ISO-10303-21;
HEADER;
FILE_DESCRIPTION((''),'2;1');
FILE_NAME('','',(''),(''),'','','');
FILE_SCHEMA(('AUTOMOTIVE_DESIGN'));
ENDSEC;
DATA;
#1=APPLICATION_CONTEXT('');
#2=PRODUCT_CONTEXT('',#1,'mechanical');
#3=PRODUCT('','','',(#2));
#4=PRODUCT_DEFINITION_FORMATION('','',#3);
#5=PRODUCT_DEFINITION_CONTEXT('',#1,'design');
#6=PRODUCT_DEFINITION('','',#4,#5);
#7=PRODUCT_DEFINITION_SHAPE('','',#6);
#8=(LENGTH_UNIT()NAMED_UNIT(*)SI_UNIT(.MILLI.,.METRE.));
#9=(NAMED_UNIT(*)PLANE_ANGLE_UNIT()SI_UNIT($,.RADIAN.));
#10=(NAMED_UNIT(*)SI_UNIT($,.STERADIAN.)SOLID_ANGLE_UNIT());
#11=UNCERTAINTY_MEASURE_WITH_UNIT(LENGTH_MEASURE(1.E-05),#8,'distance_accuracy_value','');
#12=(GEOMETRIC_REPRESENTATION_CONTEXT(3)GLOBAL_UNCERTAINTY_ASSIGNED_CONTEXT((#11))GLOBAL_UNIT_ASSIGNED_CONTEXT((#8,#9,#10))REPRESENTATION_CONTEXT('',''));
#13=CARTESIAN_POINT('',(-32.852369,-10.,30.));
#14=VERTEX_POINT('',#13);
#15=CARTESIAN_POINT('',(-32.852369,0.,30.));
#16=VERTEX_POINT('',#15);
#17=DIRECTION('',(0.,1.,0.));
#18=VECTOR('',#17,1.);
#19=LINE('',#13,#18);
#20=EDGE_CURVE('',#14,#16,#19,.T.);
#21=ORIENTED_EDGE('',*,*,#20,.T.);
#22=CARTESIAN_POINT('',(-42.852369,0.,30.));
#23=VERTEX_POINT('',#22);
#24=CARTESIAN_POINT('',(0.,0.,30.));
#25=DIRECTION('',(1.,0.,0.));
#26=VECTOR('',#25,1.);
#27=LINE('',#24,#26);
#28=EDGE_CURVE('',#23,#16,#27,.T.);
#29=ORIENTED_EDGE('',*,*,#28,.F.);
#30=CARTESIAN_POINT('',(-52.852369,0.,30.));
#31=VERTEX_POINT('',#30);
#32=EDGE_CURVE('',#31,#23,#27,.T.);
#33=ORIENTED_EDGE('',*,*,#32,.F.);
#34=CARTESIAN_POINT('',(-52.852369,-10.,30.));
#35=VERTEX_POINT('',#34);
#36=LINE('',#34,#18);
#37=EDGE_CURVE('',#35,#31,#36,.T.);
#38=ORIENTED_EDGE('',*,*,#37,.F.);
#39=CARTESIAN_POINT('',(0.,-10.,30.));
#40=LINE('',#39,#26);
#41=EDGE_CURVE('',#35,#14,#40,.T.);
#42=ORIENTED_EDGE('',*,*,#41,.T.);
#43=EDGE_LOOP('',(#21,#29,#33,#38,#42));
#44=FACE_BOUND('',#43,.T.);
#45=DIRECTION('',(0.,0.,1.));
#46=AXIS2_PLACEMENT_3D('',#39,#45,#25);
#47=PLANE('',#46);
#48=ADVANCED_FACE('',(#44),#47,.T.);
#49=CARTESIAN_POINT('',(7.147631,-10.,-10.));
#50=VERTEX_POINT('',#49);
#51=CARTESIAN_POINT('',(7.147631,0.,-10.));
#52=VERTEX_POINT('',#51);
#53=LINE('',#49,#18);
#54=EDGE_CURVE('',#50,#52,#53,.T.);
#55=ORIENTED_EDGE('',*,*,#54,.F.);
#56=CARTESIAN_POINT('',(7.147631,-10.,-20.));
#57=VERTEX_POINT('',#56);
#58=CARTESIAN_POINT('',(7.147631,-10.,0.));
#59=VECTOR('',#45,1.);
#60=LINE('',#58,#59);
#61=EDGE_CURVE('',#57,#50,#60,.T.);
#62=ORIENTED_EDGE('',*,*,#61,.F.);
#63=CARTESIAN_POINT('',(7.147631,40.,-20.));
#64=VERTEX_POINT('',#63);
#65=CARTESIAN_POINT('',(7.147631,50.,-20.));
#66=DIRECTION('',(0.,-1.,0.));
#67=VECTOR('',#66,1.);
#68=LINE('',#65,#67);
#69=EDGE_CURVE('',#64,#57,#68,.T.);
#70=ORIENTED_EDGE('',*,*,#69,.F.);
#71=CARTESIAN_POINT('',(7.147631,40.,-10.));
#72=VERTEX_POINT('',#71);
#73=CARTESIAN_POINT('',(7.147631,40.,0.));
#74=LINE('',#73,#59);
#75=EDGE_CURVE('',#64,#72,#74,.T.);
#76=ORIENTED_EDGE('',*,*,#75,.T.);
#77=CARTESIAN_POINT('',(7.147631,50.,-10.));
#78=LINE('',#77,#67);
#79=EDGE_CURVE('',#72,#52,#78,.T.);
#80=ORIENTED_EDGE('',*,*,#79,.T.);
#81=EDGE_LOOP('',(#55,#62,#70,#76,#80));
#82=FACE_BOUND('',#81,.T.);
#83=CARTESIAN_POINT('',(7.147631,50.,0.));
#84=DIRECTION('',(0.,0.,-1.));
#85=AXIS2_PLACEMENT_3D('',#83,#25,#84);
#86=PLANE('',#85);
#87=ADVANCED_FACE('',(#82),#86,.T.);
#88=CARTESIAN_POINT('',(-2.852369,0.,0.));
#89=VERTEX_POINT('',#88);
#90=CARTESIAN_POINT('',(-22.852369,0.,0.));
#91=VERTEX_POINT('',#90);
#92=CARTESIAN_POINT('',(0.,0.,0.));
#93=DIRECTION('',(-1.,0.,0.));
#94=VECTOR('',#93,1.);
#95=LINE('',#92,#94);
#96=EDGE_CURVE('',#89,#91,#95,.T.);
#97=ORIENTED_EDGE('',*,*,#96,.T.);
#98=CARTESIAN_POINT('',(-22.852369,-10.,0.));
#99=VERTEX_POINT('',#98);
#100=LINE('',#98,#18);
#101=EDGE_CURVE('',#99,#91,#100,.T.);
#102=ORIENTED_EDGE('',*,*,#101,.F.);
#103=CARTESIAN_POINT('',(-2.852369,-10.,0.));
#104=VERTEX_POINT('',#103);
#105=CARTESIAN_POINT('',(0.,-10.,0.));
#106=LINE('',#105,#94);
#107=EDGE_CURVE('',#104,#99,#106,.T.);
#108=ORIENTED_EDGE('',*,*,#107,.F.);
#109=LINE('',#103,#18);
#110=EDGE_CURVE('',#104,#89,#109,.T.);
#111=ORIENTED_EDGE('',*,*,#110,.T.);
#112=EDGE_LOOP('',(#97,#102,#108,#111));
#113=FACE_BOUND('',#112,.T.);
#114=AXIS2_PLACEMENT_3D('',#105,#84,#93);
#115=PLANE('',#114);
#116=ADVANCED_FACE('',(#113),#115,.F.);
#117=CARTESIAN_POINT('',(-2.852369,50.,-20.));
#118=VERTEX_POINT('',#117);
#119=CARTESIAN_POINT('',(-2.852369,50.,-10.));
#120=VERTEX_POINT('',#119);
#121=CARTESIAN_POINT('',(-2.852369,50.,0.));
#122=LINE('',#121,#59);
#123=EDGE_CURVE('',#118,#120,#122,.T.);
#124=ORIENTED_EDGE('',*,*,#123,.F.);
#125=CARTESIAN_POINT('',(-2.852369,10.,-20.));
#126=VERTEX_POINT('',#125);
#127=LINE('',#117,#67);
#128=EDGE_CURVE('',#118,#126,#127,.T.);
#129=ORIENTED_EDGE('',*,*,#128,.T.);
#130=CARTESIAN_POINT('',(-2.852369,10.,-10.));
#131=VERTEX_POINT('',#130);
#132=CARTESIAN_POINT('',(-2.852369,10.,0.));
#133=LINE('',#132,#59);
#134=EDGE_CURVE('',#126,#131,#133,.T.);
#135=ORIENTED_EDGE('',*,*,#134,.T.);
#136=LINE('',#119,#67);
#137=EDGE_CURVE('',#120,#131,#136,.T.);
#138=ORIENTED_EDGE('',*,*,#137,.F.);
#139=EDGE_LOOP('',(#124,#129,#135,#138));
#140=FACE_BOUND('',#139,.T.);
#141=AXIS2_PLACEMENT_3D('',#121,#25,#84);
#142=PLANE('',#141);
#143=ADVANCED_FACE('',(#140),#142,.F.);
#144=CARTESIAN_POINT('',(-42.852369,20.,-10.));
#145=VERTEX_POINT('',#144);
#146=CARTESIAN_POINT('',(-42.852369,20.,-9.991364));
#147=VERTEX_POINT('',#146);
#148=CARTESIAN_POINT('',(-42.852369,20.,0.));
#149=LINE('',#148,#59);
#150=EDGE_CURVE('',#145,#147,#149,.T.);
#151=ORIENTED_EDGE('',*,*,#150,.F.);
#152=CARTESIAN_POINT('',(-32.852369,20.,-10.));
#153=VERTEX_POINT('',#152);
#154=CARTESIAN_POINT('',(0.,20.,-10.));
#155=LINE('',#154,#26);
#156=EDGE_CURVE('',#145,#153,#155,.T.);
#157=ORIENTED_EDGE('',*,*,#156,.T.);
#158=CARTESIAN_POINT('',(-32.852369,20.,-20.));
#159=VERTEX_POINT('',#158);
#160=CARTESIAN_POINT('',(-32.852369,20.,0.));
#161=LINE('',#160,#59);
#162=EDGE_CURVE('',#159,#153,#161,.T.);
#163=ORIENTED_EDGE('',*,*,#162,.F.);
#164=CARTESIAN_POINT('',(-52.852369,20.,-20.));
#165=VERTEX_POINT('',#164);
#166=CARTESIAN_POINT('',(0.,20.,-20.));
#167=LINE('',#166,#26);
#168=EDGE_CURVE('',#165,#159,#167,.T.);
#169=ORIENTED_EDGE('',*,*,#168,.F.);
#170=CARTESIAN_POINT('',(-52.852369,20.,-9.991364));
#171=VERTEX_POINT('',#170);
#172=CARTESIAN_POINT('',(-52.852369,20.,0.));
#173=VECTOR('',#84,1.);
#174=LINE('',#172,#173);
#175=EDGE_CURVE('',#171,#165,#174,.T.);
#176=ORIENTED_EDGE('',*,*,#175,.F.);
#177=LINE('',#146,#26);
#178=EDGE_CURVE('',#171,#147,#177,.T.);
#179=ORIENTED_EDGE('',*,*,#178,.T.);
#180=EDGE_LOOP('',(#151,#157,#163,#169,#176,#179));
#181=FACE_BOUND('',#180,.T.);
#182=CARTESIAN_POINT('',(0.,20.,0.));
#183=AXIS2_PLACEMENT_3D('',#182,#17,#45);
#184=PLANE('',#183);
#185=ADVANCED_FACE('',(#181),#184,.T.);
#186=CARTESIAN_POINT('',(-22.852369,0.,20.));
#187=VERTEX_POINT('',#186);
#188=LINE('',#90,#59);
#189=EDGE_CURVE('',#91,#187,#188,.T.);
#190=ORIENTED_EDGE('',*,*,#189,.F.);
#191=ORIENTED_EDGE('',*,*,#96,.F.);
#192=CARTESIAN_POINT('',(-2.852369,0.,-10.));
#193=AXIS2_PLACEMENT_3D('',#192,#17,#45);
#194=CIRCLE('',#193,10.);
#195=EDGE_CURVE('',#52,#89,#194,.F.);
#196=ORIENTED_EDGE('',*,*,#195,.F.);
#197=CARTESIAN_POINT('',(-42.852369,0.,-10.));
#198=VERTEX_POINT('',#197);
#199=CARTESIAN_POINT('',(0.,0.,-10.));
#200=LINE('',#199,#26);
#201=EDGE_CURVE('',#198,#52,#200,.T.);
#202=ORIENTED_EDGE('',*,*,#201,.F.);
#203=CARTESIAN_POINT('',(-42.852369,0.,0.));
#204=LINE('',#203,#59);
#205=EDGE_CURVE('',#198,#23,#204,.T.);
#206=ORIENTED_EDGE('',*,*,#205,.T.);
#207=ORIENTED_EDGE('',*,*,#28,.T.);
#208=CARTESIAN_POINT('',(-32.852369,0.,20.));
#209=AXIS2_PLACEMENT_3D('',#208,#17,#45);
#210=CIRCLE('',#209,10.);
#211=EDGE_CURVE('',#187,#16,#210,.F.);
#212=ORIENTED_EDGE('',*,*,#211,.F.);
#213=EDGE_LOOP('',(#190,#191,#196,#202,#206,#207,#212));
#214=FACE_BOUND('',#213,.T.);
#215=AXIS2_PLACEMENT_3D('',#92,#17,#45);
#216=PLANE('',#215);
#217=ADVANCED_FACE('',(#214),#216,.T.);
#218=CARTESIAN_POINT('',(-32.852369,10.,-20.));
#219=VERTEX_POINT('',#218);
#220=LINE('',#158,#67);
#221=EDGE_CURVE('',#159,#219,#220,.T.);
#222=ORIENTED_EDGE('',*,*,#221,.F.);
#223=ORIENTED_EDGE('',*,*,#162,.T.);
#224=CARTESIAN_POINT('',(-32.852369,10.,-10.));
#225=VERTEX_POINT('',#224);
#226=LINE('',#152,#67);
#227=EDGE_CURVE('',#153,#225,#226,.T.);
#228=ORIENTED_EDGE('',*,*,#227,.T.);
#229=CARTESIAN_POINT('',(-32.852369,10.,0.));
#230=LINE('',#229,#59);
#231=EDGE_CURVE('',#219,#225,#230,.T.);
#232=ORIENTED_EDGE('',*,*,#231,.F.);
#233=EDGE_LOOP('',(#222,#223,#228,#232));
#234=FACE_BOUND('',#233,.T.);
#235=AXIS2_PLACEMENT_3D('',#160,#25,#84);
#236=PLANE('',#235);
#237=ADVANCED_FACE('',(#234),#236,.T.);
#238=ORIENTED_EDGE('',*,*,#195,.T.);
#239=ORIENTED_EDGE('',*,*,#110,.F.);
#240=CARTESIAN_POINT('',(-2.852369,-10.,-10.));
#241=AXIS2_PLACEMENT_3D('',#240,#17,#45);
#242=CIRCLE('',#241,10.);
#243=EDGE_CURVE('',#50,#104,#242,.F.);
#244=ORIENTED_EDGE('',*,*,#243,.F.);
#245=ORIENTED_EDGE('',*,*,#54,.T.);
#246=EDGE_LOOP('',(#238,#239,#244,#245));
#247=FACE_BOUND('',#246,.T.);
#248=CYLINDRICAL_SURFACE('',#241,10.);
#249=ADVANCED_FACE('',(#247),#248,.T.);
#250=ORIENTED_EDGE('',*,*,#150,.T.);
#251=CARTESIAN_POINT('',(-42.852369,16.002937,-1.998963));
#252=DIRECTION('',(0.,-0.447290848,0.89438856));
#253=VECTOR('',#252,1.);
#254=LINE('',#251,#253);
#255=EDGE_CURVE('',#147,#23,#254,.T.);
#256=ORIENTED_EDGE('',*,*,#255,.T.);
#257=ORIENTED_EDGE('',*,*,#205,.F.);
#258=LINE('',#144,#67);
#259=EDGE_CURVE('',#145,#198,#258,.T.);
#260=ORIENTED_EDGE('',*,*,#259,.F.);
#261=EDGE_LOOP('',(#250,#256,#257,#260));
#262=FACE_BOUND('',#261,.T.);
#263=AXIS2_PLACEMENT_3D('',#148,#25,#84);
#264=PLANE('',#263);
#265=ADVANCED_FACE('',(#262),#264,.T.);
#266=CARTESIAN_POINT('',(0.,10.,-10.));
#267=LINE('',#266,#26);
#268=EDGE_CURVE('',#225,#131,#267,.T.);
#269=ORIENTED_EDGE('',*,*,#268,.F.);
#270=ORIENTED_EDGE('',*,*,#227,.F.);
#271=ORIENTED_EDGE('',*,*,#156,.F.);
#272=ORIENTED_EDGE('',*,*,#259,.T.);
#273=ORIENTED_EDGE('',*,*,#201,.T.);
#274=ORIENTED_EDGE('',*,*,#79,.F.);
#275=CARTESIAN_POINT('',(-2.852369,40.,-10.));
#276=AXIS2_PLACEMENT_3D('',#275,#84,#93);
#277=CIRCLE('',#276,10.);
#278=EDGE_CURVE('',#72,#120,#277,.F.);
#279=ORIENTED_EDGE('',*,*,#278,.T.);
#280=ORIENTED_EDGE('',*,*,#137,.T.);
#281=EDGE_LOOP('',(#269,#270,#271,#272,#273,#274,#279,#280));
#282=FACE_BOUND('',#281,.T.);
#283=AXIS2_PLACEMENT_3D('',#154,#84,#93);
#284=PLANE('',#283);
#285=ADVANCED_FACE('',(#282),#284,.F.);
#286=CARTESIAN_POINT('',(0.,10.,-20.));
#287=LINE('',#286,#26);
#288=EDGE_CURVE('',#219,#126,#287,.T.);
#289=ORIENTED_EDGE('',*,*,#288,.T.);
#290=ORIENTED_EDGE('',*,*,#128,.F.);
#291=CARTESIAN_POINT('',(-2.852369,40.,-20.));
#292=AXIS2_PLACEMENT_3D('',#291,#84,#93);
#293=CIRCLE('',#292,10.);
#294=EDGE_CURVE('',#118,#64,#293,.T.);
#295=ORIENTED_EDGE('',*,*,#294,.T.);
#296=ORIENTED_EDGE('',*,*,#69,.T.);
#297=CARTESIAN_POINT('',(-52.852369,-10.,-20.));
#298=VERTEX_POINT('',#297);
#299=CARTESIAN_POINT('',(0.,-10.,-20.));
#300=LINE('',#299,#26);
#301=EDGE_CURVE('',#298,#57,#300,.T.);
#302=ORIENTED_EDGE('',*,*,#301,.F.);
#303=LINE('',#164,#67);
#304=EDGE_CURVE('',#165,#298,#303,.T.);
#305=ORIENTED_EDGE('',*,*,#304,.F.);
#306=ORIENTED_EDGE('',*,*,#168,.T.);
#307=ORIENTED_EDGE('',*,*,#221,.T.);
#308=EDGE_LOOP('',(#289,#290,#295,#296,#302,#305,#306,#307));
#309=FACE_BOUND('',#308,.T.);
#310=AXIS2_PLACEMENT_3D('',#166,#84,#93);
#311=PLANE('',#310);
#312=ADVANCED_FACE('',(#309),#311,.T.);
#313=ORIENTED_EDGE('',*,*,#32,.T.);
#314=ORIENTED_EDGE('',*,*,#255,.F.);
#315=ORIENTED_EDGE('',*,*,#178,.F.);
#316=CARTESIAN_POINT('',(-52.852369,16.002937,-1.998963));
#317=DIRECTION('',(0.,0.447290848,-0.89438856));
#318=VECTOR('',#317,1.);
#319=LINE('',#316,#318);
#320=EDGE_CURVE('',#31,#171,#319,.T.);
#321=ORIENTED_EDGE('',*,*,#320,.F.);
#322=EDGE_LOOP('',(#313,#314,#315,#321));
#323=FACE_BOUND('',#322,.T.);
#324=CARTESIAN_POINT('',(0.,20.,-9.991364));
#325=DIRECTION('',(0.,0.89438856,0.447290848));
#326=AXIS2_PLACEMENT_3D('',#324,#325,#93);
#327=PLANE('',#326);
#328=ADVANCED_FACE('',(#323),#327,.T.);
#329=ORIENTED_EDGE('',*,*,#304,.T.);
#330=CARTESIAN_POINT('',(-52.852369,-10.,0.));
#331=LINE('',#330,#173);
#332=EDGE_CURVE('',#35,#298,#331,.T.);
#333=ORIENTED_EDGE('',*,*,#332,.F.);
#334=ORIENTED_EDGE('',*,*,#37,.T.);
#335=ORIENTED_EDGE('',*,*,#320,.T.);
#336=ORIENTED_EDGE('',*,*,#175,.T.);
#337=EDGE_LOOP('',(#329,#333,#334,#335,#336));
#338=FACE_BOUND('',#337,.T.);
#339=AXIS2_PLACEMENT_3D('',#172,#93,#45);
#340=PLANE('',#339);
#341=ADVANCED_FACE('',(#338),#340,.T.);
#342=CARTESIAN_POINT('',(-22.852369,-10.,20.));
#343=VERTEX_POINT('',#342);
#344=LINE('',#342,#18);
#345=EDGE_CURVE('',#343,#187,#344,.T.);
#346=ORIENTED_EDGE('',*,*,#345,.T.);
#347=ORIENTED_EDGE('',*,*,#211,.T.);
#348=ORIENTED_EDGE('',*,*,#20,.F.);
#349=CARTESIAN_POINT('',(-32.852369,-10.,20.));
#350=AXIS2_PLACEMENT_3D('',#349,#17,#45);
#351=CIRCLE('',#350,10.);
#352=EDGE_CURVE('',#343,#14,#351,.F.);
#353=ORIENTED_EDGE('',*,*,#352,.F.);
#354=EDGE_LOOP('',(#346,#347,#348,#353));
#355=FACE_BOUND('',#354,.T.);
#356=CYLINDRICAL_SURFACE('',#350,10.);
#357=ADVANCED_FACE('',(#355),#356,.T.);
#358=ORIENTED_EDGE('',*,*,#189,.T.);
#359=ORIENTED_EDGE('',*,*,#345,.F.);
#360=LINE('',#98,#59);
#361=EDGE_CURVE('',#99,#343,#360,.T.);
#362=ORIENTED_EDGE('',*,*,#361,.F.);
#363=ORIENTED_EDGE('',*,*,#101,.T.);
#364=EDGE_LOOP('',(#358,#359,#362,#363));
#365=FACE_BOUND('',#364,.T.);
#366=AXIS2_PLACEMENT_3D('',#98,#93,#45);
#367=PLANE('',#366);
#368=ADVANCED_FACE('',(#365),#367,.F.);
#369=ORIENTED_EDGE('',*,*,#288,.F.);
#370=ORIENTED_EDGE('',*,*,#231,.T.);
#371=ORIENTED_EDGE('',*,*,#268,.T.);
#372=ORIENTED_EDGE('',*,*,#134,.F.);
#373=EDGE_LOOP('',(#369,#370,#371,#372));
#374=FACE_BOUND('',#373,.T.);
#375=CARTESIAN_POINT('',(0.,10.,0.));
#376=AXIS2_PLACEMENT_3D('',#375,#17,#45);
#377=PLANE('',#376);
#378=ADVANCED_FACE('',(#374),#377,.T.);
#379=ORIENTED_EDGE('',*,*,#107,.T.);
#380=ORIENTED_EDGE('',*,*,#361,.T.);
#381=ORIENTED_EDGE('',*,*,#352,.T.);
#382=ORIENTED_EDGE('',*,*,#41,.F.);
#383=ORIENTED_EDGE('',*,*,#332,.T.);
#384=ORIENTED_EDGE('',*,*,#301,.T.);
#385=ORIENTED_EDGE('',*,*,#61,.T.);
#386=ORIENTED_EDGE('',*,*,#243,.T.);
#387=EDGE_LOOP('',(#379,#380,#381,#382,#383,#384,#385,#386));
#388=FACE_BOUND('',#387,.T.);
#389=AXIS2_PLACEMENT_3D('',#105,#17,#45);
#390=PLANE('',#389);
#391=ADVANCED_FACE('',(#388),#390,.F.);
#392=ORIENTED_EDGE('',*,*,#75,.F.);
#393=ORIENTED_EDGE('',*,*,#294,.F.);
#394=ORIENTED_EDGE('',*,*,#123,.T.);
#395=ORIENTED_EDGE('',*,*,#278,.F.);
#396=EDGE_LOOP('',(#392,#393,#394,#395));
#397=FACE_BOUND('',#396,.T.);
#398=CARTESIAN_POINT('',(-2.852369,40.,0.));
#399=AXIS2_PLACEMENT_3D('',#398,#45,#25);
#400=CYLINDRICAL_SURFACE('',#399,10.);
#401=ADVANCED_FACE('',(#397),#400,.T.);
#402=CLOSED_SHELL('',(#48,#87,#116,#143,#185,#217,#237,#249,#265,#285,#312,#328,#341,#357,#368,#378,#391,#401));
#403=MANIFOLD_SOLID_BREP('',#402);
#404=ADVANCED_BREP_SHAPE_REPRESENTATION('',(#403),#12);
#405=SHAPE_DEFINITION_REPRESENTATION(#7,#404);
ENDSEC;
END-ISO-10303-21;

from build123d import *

# Parameters (mm, degrees)
SKETCH1_W           = 10
SKETCH1_H           = 10
BOSS_EXTRUDE1_DEPTH = 20
SKETCH1_3_W         = 10
SKETCH1_3_H         = 10
BOSS_EXTRUDE2_DEPTH = 20
SKETCH1_4_W         = 10
SKETCH1_4_H         = 40
BOSS_EXTRUDE3_DEPTH = 20
SKETCH1_5_W         = 10
SKETCH1_5_H         = 10
BOSS_EXTRUDE4_DEPTH = 50
SKETCH1_6_W         = 30
SKETCH1_6_H         = 10
BOSS_EXTRUDE5_DEPTH = 10
CHAMFER1_SIZE2      = 39.991364166
CHAMFER1_SIZE       = 20
FILLET1_R           = 10
SKETCH1_7_W         = 10
SKETCH1_7_H         = 40
SKETCH1_7_H_2       = 10
SKETCH1_7_W_2       = 30
BOSS_EXTRUDE6_DEPTH = 10


with BuildPart() as part:
    # Sketch1 → Boss-Extrude1 (new body)
    with BuildSketch(Plane(origin=(0, 0, 0), x_dir=(1, 0, 0), z_dir=(0, 1, 0))):
        with Locations((-47.852369013, 15)):
            Rectangle(SKETCH1_W, SKETCH1_H)
    extrude(amount=BOSS_EXTRUDE1_DEPTH)

    # Sketch1<3> → Boss-Extrude2 (add)
    with BuildSketch(Plane(origin=(0, 0, 0), x_dir=(1, 0, 0), z_dir=(0, 1, 0))):
        with Locations((-37.852369013, 15)):
            Rectangle(SKETCH1_3_W, SKETCH1_3_H)
    extrude(amount=BOSS_EXTRUDE2_DEPTH)

    # Sketch1<4> → Boss-Extrude3 (add)
    with BuildSketch(Plane(origin=(0, 0, 0), x_dir=(1, 0, 0), z_dir=(0, 1, 0))):
        with Locations((-47.852369013, -10)):
            Rectangle(SKETCH1_4_W, SKETCH1_4_H)
    extrude(amount=BOSS_EXTRUDE3_DEPTH)



with BuildPart() as body_2:
    # Sketch1<5> → Boss-Extrude4 (new body)
    with BuildSketch(Plane(origin=(0, 0, 0), x_dir=(1, 0, 0), z_dir=(0, 1, 0))):
        with Locations((2.147630987, 15)):
            Rectangle(SKETCH1_5_W, SKETCH1_5_H)
    extrude(amount=BOSS_EXTRUDE4_DEPTH)


with BuildPart() as part_1:
    add(part.part)

    add(body_2.part)  # Boss-Extrude5 merges body 2
    # Sketch1<6> → Boss-Extrude5 (add)
    with BuildSketch(Plane(origin=(0, 0, 0), x_dir=(1, 0, 0), z_dir=(0, 1, 0))):
        with Locations((-17.852369013, 15)):
            Rectangle(SKETCH1_6_W, SKETCH1_6_H)
    extrude(amount=BOSS_EXTRUDE5_DEPTH)

    # Chamfer1
    chamfer1_edges = [part_1.edges().sort_by_distance(p)[0] for p in [
        (-47.852369013, 20, 30),
    ]]
    chamfer1_side = [part_1.faces().sort_by_distance(p)[0] for p in [
        (-47.852369013, 19.6, 30),
    ]]
    chamfer(chamfer1_edges, length=CHAMFER1_SIZE - 0.0001, length2=CHAMFER1_SIZE2 - 0.0001, reference=chamfer1_side[0])  # a hair under: the kernel refuses the full size

    # Fillet1
    fillet1_edges = [part_1.edges().sort_by_distance(p)[0] for p in [
        (7.147630987, 50, -15),
    ]]
    fillet(fillet1_edges, radius=FILLET1_R - 0.0001)  # a hair under: the kernel refuses the full size

    # Sketch1<7> → Boss-Extrude6 (add)
    with BuildSketch(Plane(origin=(0, 0, 0), x_dir=(1, 0, 0), z_dir=(0, 1, 0))):
        with Locations((-47.852369013, -10)):
            Rectangle(SKETCH1_7_W, SKETCH1_7_H)
        with BuildLine():
            Line((-42.852369013, 10), (-42.852369013, -30))
            Line((-42.852369013, -30), (-32.852369013, -30))
            ThreePointArc((-32.852369013, -30), (-25.781301201, -27.071067812), (-22.852369013, -20))
            Line((-22.852369013, -20), (-22.852369013, 0))
            Line((-22.852369013, 0), (-2.852369013, 0))
            ThreePointArc((-2.852369013, 0), (4.218698799, 2.928932188), (7.147630987, 10))
            Line((7.147630987, 10), (-2.852369013, 10))
            Line((-2.852369013, 10), (-32.852369013, 10))
            Line((-32.852369013, 10), (-42.852369013, 10))
        make_face()
        with Locations((-47.852369013, 15)):
            Rectangle(SKETCH1_7_W, SKETCH1_7_H_2)
        with Locations((-37.852369013, 15)):
            Rectangle(SKETCH1_7_W, SKETCH1_7_H_2)
        with Locations((-17.852369013, 15)):
            Rectangle(SKETCH1_7_W_2, SKETCH1_7_H_2)
        with Locations((2.147630987, 15)):
            Rectangle(SKETCH1_7_W, SKETCH1_7_H_2)
    extrude(amount=-BOSS_EXTRUDE6_DEPTH)


solid = part_1.part
